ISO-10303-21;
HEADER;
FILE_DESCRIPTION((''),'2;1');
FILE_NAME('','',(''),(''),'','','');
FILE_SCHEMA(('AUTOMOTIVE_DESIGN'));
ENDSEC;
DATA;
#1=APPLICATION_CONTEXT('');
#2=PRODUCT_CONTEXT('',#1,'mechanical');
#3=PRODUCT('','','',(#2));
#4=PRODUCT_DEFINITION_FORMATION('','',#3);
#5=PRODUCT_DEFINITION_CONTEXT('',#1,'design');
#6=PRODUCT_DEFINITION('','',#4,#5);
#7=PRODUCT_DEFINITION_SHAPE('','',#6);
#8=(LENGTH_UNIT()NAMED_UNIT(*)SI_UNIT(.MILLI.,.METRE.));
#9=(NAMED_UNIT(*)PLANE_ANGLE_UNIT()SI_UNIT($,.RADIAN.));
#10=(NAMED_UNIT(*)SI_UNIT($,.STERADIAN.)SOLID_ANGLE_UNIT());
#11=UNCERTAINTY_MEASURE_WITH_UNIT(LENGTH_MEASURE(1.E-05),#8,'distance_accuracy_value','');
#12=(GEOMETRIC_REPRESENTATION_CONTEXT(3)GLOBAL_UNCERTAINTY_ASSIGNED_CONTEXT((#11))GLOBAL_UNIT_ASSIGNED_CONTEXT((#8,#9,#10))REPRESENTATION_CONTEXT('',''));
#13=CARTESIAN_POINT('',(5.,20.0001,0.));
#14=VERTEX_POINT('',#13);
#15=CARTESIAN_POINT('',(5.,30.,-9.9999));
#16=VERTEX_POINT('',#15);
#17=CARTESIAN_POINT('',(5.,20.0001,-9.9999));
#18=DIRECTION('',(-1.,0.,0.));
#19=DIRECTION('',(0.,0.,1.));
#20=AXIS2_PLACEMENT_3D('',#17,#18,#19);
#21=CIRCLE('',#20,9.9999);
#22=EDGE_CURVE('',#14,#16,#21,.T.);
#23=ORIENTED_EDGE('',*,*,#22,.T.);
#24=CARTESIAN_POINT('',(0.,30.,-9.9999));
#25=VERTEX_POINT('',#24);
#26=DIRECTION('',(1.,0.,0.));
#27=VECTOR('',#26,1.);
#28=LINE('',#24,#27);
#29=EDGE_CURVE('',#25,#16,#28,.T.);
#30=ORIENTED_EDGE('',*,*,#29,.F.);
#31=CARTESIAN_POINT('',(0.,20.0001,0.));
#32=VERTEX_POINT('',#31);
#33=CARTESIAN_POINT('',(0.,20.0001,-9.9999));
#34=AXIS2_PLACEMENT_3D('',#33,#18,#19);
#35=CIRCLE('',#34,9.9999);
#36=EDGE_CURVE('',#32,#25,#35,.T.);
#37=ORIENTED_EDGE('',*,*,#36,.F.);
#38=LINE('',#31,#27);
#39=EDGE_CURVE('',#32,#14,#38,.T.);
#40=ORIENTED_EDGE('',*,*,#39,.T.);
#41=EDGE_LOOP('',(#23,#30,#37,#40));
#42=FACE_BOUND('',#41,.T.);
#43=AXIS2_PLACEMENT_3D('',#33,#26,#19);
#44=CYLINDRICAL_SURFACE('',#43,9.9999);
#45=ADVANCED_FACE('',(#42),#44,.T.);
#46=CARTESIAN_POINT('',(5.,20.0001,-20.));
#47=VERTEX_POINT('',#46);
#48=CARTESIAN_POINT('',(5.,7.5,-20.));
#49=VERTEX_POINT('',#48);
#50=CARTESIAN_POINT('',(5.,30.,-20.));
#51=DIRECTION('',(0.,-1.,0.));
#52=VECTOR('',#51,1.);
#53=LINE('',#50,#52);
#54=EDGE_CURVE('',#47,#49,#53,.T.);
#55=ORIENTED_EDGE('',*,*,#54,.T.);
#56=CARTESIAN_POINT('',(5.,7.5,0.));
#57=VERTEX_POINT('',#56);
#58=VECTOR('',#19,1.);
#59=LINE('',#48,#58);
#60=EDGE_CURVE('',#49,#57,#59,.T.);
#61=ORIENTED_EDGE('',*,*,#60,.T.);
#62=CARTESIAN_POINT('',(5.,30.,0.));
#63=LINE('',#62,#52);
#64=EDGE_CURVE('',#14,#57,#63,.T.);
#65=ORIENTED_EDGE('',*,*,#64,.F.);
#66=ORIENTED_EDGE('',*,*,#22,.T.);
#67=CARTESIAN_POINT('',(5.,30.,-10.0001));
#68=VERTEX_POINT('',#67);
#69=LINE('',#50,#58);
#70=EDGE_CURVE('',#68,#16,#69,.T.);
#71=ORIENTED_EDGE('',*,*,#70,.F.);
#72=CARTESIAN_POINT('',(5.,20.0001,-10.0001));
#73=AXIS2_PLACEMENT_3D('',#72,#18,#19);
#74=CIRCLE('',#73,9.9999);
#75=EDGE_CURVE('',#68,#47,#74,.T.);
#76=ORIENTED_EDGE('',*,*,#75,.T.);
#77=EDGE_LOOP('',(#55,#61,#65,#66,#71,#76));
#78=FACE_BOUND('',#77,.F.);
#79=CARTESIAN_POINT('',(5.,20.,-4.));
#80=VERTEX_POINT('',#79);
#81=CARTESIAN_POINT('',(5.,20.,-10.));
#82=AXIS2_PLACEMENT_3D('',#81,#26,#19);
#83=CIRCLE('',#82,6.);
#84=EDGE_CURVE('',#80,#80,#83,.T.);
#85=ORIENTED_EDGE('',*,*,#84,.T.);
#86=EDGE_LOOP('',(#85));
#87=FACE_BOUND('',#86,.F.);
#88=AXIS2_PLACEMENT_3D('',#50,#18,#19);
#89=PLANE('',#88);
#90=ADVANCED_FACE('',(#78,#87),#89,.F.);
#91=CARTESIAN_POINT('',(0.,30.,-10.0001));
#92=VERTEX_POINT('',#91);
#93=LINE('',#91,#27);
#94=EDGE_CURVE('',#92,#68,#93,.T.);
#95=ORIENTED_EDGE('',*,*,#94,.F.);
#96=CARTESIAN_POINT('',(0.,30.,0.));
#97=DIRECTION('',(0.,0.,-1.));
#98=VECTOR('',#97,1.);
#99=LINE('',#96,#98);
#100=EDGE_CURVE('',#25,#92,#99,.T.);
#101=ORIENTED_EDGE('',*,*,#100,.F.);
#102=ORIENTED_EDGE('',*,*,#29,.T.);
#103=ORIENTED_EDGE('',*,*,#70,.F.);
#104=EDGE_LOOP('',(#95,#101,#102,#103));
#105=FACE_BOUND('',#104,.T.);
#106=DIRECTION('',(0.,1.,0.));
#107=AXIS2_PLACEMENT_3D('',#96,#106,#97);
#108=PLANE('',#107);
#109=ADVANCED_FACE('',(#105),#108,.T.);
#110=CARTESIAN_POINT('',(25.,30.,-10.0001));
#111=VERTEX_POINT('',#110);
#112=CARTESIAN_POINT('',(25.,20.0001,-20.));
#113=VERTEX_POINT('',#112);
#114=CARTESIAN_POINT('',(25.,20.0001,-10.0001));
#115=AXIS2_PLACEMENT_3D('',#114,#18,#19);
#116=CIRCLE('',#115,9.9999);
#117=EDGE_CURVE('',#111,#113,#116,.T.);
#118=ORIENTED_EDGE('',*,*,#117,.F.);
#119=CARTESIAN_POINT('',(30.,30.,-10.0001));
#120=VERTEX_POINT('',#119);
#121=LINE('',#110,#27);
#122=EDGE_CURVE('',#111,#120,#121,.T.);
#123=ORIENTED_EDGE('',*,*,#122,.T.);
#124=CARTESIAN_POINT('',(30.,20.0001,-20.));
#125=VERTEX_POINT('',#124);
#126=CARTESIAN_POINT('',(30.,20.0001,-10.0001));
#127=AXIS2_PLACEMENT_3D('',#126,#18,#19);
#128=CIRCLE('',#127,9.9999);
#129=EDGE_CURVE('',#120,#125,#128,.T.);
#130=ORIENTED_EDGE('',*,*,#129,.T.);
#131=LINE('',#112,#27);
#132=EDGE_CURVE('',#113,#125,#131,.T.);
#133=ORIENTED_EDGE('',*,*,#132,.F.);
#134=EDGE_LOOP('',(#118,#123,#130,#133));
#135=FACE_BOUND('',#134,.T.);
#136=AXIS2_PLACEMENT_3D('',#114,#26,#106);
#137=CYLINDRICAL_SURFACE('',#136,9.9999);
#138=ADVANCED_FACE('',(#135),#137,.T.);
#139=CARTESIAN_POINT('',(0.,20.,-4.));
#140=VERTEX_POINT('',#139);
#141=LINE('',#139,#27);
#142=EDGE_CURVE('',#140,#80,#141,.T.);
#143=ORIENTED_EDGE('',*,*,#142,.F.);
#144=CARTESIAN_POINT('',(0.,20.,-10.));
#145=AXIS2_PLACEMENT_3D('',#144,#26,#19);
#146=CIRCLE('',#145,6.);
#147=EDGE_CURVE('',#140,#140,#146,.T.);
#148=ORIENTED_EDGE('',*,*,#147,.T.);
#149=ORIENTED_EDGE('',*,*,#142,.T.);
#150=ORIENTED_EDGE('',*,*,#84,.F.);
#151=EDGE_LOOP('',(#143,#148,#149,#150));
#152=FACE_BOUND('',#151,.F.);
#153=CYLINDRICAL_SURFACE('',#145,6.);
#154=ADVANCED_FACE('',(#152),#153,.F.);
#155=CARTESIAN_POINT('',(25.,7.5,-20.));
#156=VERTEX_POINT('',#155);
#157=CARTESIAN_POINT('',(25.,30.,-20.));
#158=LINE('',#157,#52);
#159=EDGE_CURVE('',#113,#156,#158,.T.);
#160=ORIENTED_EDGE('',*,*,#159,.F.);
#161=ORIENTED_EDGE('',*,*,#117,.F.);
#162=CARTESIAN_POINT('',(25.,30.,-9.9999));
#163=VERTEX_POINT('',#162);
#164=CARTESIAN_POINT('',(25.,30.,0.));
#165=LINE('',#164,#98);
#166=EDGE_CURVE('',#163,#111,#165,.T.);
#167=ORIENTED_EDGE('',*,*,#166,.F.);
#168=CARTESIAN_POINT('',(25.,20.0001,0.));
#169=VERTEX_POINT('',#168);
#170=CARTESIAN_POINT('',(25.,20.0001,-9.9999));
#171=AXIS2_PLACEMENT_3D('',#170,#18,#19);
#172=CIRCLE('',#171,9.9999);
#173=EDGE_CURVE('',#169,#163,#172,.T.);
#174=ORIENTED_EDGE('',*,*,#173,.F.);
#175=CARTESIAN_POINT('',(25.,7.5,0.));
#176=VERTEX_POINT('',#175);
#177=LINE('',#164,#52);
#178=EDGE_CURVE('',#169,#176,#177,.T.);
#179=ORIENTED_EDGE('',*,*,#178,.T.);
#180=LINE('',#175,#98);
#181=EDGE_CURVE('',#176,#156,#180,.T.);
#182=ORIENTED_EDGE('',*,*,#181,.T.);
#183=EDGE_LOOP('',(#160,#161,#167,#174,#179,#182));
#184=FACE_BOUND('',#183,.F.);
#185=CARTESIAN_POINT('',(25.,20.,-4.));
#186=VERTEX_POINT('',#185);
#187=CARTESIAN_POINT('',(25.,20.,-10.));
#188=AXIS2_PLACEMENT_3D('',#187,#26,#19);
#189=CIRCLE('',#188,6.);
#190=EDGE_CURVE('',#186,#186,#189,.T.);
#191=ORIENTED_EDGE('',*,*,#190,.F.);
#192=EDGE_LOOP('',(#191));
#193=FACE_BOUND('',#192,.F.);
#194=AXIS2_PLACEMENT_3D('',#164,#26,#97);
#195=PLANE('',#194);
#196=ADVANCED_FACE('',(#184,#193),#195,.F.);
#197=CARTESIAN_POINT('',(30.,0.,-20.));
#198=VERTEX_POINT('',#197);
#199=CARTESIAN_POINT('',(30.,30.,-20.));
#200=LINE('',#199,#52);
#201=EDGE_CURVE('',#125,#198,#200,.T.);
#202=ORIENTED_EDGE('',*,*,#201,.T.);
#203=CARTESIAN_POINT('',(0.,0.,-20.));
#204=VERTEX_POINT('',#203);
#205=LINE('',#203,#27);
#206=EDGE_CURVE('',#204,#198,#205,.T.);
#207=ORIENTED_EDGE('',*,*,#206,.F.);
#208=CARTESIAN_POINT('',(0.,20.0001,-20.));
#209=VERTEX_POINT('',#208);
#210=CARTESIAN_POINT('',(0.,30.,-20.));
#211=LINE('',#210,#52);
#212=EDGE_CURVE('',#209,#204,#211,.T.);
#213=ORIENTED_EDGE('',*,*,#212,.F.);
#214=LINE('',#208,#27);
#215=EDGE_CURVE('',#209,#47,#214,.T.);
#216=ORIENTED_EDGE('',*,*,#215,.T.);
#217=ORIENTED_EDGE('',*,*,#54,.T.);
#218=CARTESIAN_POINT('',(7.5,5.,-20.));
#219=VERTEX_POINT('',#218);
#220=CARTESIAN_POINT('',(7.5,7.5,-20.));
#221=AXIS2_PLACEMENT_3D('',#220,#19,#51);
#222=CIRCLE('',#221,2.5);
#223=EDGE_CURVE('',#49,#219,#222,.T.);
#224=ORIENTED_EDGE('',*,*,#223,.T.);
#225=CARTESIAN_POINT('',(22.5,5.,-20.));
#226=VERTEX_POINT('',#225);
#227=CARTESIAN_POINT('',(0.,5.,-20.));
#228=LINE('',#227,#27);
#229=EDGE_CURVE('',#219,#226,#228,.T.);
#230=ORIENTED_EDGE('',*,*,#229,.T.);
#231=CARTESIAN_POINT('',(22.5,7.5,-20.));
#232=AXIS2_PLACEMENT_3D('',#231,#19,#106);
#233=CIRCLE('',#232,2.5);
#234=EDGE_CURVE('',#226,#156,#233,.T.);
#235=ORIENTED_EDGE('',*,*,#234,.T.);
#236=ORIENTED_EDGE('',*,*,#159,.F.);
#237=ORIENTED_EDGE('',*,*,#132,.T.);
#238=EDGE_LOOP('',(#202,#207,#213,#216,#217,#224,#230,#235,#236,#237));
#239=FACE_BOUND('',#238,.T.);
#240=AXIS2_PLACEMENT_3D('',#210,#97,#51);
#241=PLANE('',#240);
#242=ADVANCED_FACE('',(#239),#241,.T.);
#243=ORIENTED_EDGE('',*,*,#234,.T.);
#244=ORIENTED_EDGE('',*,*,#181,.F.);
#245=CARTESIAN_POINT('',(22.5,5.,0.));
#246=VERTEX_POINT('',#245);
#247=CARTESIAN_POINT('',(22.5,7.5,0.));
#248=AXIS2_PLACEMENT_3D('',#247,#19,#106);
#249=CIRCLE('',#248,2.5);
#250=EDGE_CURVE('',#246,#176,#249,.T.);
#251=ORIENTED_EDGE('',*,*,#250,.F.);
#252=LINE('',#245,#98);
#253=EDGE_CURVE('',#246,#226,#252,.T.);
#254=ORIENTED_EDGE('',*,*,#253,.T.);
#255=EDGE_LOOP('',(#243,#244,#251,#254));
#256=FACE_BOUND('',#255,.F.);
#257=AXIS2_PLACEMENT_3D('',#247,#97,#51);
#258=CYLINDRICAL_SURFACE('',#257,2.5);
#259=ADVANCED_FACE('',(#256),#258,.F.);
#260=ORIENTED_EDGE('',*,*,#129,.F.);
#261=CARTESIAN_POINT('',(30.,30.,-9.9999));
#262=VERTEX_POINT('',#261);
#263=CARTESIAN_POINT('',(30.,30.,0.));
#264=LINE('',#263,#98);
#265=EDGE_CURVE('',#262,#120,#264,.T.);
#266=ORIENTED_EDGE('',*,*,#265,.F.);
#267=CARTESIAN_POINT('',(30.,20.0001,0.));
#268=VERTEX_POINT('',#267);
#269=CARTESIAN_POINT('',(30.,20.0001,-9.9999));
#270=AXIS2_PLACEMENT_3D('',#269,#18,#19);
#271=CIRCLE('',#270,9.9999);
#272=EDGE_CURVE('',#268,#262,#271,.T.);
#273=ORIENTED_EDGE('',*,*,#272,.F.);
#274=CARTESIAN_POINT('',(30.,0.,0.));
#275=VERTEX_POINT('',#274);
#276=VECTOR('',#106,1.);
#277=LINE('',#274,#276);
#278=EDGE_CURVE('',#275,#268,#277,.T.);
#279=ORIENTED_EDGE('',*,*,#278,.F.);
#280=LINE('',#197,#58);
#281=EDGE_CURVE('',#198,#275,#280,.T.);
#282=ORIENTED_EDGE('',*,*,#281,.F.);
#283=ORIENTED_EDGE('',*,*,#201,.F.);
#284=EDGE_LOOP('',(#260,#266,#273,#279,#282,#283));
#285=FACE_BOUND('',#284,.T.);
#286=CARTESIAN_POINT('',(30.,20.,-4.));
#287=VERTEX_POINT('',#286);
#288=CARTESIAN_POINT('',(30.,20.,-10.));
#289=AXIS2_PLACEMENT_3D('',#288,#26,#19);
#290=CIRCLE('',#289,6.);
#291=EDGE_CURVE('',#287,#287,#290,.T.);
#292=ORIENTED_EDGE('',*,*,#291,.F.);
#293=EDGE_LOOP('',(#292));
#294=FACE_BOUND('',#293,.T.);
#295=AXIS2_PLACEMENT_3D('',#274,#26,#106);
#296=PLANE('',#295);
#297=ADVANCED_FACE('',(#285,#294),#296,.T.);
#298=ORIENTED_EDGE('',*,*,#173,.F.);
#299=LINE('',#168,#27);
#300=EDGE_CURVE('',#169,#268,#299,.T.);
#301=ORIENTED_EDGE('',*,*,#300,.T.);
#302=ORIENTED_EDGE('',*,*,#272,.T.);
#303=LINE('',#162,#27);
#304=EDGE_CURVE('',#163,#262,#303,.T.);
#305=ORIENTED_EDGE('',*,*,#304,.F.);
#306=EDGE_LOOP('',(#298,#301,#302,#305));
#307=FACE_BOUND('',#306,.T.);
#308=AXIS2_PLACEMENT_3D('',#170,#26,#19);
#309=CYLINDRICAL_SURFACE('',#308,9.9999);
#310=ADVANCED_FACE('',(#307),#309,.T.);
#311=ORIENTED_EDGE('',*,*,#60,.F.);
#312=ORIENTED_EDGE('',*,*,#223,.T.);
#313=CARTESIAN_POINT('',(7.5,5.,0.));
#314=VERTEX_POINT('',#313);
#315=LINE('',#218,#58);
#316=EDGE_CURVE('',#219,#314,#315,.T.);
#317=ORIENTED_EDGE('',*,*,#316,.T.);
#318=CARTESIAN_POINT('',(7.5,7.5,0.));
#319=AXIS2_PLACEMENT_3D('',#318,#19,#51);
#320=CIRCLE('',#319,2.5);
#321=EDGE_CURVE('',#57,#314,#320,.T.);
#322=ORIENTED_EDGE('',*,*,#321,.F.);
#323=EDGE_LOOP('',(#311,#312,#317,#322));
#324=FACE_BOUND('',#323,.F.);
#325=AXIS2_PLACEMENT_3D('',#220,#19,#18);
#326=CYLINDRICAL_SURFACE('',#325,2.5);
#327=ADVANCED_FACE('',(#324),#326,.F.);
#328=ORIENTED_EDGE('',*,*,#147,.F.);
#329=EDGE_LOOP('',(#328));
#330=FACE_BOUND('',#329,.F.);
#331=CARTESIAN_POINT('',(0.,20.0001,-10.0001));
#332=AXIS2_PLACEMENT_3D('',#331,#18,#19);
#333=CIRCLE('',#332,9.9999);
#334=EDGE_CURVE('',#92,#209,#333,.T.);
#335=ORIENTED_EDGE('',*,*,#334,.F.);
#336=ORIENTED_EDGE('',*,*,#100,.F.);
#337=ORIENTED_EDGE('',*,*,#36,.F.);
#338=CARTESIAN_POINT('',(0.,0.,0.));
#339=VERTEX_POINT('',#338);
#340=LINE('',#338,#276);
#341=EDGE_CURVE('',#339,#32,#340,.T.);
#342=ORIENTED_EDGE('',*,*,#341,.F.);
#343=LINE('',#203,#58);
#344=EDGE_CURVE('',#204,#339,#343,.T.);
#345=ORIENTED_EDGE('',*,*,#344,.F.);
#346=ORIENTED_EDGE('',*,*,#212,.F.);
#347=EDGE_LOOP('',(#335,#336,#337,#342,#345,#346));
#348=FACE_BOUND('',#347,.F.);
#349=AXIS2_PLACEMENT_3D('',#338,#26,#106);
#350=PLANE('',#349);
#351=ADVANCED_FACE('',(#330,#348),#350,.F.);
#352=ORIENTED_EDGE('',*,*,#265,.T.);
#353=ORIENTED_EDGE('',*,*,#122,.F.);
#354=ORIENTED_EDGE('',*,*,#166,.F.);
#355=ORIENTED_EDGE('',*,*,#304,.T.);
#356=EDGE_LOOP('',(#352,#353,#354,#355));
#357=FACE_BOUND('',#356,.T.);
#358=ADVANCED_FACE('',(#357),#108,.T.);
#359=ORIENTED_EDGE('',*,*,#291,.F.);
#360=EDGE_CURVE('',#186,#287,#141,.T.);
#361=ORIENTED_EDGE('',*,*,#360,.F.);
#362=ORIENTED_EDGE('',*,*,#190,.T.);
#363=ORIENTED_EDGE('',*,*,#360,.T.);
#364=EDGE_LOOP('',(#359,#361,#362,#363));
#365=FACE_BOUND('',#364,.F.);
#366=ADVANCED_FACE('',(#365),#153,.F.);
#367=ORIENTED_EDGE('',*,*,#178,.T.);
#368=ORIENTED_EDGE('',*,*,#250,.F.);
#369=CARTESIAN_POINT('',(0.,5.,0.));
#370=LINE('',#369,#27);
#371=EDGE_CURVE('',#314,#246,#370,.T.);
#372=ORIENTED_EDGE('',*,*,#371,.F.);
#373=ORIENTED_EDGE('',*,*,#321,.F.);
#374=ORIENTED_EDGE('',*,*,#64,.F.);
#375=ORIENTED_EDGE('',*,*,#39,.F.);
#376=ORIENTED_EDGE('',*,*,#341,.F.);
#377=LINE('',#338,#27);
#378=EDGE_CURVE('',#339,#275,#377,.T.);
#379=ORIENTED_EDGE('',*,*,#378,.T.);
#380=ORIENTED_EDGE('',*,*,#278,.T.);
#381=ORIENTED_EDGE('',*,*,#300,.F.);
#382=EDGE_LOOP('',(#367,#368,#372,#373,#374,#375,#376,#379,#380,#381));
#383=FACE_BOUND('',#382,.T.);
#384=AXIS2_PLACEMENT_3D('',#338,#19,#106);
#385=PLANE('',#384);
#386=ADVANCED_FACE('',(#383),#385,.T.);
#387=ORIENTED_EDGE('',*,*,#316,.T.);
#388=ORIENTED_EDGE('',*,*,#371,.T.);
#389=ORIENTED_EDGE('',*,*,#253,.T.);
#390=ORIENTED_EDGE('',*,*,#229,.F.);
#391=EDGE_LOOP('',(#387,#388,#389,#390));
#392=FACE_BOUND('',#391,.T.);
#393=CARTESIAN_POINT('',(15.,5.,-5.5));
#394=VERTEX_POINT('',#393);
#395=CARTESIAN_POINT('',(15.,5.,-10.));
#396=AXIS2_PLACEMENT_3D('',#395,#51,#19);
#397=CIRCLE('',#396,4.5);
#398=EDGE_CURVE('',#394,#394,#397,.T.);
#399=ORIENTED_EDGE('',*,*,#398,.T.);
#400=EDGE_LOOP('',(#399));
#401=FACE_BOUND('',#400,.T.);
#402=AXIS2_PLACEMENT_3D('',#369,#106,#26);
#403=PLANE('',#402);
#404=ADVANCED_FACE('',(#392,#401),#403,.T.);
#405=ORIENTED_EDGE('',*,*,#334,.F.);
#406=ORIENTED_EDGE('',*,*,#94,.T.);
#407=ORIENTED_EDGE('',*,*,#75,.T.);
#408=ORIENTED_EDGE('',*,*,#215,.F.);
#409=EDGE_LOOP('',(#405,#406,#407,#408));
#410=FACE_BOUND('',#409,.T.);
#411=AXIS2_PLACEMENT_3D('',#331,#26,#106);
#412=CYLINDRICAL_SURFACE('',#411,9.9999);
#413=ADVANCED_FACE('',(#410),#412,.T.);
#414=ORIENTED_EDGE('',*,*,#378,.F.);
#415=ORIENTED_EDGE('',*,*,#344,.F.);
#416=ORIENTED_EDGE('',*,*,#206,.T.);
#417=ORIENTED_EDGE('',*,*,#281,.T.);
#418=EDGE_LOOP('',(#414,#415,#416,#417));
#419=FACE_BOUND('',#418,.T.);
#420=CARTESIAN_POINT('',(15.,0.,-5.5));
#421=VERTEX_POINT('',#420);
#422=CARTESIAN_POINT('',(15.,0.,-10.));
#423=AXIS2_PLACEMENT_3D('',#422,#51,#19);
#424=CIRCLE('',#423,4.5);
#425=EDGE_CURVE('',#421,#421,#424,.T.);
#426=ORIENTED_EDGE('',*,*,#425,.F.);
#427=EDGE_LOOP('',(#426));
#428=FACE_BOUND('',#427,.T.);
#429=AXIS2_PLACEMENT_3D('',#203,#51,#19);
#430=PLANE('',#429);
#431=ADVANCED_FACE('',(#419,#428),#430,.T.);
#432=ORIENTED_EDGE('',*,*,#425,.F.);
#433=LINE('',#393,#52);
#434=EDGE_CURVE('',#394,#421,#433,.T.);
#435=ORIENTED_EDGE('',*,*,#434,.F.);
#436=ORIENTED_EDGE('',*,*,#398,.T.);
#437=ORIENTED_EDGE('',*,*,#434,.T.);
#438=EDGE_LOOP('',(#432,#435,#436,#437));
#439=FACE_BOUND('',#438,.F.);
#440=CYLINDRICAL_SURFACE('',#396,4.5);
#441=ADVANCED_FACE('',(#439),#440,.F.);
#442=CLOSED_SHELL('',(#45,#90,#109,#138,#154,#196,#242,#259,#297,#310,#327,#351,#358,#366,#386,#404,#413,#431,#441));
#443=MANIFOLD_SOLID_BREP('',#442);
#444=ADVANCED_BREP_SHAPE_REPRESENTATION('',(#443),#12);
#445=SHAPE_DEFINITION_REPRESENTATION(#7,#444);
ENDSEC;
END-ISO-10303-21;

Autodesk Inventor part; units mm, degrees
ref_plane "YZ Plane" through (0, 0, 0) normal (1, 0, 0) x (0, 1, 0)
ref_plane "XZ Plane" through (0, 0, 0) normal (0, 1, 0) x (-1, 0, 0)
ref_plane "XY Plane" through (0, 0, 0) normal (0, 0, 1) x (1, 0, 0)
sketch "Sketch1" plane through (0, 0, 0) normal (1, 0, 0) x (0, 1, 0)
  line L0 (0, 0) -> (30, 0)
  line L1 (30, 0) -> (30, -20)
  line L2 (30, -20) -> (0, -20)
  line L3 (0, -20) -> (0, 0)
  dimension "d0" = 30
  dimension "d1" = 20
extrude "Extrusion1" add sketch "Sketch1" along normal blind 30
sketch "Sketch2" plane through (0, 30, 0) normal (0, 1, 0) x (1, 0, 0)
  line L0 (0, 0) -> (30, 0) projected
  line L1 (0, 20) -> (30, 20) projected
  line L2 (5, 0) -> (25, 0)
  line L3 (25, 0) -> (25, 20)
  line L4 (25, 20) -> (5, 20)
  line L5 (5, 20) -> (5, 0)
  line L6 (30, 20) -> (30, 0) projected
  dimension "d4" = 5
  dimension "d5" = 5
extrude "Extrusion2" cut sketch "Sketch2" against normal blind 25 contours L5 L1 L3 L0
fillet "Fillet1" radius 2.5 2 edges at (5, 5, -10) (25, 5, -10)
hole "Hole1" at (0, 20, -10) direction (1, 0, 0) diameter 12 end through all
fillet "Fillet3" radius 10 4 edges at (27.5, 30, -20) (2.5, 30, -20) (2.5, 30, 0) (27.5, 30, 0)
sketch "Sketch4" plane through (0, 5, 0) normal (0, 1, 0) x (1, 0, 0)
  line L0 (0, 4) -> (0, 16) projected
  line L1 (0, 10) -> (30, 10)
  line L2 (30, 20) -> (30, 0) projected
  point P0 (0, 0)
  point P1 (15, 10)
hole "Hole2" at (15, 5, -10) direction (0, -1, 0) diameter 9 end through all
properties part number "Damper_Mount_03"
